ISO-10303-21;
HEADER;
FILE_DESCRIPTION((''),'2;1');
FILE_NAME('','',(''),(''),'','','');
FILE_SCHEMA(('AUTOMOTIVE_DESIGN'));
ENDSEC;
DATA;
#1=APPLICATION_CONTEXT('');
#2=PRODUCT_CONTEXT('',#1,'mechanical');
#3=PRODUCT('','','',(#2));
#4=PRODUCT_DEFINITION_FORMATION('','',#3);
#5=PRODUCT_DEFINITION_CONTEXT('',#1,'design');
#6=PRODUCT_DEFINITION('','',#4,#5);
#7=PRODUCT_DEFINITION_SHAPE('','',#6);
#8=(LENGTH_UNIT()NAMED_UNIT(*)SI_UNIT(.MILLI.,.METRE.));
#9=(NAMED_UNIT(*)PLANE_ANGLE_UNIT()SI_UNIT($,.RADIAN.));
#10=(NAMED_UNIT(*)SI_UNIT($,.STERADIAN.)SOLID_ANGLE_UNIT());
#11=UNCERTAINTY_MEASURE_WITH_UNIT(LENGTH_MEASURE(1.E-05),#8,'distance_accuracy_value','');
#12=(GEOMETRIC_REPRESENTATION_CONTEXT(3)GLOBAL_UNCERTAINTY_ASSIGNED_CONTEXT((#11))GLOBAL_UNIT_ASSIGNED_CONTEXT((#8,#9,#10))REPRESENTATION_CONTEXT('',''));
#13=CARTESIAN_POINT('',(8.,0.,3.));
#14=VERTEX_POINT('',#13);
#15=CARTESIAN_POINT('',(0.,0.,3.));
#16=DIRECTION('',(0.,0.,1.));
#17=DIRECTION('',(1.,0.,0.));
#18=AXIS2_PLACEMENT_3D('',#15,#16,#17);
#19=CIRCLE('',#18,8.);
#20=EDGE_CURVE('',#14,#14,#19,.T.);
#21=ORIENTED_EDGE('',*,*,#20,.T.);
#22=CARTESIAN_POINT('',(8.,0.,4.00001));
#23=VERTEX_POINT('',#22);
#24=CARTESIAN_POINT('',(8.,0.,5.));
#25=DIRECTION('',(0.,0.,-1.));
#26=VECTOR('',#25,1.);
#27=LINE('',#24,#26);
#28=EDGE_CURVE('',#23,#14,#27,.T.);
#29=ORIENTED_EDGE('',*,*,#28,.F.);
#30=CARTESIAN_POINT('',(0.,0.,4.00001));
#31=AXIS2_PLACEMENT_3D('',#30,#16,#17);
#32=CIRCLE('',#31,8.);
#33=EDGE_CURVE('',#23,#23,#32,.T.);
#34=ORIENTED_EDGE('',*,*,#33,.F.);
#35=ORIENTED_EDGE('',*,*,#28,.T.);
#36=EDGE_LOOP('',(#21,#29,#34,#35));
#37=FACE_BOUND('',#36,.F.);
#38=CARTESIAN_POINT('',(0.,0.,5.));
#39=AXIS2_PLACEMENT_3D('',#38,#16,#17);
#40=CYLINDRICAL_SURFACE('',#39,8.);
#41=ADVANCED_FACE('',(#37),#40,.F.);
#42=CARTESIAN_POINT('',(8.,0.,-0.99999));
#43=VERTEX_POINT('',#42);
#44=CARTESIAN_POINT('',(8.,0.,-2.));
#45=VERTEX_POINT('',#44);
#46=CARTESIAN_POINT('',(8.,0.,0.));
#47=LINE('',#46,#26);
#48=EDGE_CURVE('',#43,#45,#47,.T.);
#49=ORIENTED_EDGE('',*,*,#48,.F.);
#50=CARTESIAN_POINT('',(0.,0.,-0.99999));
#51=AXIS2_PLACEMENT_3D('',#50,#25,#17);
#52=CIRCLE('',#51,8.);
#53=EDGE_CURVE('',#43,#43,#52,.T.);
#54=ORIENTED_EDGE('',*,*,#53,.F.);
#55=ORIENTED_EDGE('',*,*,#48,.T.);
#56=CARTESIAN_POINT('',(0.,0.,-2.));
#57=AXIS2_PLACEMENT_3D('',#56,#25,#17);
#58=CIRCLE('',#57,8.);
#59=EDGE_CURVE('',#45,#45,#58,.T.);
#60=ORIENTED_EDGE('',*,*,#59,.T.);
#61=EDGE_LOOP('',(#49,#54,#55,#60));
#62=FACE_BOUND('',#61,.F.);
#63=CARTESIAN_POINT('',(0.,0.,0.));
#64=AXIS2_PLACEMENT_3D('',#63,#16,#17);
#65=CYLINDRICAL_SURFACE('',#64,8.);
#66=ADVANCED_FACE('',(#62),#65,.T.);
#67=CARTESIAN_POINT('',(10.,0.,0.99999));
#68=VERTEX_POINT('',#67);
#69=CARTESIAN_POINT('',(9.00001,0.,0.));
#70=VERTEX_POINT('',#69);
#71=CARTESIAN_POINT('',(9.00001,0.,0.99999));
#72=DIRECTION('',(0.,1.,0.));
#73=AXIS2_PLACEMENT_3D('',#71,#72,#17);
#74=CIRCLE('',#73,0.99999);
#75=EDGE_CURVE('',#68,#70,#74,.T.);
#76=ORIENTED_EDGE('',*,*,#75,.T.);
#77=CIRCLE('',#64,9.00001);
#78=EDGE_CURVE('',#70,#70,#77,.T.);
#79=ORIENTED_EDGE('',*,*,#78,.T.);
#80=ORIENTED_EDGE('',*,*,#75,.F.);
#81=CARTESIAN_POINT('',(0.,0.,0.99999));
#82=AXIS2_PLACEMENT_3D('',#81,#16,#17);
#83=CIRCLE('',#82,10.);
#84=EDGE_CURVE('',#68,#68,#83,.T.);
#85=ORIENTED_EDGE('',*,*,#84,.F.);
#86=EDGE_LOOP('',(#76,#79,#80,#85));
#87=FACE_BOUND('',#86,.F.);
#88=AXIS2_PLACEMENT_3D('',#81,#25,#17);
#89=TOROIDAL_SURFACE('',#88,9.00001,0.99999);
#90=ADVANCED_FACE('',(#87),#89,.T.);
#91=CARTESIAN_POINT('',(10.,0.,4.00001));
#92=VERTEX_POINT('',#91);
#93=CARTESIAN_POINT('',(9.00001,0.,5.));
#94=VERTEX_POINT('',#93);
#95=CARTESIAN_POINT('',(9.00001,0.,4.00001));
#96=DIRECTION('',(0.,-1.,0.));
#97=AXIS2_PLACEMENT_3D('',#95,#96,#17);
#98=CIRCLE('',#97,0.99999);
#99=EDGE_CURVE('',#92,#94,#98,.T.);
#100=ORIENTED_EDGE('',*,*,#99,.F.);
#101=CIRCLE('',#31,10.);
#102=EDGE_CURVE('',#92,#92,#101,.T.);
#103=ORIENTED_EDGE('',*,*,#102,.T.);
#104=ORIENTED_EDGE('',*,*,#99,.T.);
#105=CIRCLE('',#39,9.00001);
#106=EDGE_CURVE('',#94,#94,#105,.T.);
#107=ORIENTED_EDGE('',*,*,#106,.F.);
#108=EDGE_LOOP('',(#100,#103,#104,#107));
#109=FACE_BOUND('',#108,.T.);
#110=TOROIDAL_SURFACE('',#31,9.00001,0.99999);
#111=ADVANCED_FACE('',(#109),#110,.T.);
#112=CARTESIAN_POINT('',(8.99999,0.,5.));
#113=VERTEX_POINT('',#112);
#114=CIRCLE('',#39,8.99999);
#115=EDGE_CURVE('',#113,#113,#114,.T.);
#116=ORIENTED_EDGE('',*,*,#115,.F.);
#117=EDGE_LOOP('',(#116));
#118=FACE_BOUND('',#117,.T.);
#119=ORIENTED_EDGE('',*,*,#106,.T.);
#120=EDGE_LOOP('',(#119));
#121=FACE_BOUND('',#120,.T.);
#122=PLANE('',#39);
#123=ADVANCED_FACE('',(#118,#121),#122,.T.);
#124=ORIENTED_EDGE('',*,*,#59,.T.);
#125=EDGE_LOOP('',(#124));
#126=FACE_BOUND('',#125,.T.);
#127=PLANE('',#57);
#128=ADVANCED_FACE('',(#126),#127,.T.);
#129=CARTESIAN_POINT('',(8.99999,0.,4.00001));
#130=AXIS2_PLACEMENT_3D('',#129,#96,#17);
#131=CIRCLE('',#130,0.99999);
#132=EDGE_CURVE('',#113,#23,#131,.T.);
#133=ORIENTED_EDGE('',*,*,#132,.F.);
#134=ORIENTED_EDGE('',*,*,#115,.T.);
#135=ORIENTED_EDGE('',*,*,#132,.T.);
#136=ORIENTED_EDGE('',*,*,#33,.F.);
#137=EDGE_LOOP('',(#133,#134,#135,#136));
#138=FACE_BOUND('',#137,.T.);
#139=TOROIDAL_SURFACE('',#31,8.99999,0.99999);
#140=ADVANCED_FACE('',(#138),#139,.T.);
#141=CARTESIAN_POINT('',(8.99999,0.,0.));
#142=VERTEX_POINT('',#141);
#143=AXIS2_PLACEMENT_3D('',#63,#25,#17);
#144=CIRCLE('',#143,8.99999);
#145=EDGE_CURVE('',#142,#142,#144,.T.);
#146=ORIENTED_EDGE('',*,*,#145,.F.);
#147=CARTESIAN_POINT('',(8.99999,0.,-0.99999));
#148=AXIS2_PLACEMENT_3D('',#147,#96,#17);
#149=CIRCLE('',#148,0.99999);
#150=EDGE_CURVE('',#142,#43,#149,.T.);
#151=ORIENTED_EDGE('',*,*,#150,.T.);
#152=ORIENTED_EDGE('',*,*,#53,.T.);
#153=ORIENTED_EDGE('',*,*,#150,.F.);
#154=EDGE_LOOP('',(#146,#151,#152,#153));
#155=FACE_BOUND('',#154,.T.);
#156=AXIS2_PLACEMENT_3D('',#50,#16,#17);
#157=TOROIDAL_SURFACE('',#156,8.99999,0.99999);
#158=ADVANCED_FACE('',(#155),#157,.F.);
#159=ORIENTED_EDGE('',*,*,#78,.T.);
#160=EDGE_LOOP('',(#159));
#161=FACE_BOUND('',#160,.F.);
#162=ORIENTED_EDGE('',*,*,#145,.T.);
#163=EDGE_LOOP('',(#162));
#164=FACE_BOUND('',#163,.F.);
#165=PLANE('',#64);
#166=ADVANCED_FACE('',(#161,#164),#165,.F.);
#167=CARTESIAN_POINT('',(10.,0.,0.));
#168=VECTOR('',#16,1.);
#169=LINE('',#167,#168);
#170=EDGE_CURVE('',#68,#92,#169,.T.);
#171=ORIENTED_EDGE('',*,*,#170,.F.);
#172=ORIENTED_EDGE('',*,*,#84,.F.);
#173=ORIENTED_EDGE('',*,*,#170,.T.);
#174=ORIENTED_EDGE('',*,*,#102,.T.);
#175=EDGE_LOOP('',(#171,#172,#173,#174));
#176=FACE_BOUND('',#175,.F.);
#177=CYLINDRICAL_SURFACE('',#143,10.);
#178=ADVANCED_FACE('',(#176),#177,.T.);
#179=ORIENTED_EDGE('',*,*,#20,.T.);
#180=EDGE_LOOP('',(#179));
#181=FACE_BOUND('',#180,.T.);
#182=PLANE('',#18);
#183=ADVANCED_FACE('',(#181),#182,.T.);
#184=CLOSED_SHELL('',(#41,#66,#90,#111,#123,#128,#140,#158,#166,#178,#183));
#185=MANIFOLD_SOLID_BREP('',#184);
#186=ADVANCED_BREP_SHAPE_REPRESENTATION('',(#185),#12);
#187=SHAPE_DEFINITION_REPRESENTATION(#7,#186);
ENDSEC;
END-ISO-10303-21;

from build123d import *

# Parameters (mm, degrees)
F0_R     = 10
F1_DEPTH = 5
F2_R     = 8
F3_DEPTH = 2
F4_R     = 8
F5_DEPTH = 2
F6_R     = 0.99999


# Not quite as in the source:
# - a fillet or chamfer is up to 0.001 mm smaller than in the source, because OpenCascade refuses the exact size


with BuildPart() as f1:
    # F0 (on Top) → F1 (new body)
    with BuildSketch(Plane.XY):
        Circle(F0_R)
    extrude(amount=F1_DEPTH)

    # F2 (on face) → F3 (join)
    with BuildSketch(Plane(origin=(0, 0, 0), x_dir=(1, 0, 0), z_dir=(0, 0, -1))):
        Circle(F2_R)
    extrude(amount=F3_DEPTH)

    # F4 (on face) → F5 (cut)
    with BuildSketch(Plane.XY.offset(5)):
        Circle(F4_R)
    extrude(amount=-F5_DEPTH, mode=Mode.SUBTRACT)

    # F6 (radius 1 in the source; OpenCascade refuses exactly that, so slightly less here)
    f6_edges = [f1.edges().sort_by_distance(p)[0] for p in [
        (-8, 0, 0),
        (-10, 0, 0),
        (-10, 0, 5),
        (-8, 0, 5),
    ]]
    fillet(f6_edges, radius=F6_R)


solid = f1.part
